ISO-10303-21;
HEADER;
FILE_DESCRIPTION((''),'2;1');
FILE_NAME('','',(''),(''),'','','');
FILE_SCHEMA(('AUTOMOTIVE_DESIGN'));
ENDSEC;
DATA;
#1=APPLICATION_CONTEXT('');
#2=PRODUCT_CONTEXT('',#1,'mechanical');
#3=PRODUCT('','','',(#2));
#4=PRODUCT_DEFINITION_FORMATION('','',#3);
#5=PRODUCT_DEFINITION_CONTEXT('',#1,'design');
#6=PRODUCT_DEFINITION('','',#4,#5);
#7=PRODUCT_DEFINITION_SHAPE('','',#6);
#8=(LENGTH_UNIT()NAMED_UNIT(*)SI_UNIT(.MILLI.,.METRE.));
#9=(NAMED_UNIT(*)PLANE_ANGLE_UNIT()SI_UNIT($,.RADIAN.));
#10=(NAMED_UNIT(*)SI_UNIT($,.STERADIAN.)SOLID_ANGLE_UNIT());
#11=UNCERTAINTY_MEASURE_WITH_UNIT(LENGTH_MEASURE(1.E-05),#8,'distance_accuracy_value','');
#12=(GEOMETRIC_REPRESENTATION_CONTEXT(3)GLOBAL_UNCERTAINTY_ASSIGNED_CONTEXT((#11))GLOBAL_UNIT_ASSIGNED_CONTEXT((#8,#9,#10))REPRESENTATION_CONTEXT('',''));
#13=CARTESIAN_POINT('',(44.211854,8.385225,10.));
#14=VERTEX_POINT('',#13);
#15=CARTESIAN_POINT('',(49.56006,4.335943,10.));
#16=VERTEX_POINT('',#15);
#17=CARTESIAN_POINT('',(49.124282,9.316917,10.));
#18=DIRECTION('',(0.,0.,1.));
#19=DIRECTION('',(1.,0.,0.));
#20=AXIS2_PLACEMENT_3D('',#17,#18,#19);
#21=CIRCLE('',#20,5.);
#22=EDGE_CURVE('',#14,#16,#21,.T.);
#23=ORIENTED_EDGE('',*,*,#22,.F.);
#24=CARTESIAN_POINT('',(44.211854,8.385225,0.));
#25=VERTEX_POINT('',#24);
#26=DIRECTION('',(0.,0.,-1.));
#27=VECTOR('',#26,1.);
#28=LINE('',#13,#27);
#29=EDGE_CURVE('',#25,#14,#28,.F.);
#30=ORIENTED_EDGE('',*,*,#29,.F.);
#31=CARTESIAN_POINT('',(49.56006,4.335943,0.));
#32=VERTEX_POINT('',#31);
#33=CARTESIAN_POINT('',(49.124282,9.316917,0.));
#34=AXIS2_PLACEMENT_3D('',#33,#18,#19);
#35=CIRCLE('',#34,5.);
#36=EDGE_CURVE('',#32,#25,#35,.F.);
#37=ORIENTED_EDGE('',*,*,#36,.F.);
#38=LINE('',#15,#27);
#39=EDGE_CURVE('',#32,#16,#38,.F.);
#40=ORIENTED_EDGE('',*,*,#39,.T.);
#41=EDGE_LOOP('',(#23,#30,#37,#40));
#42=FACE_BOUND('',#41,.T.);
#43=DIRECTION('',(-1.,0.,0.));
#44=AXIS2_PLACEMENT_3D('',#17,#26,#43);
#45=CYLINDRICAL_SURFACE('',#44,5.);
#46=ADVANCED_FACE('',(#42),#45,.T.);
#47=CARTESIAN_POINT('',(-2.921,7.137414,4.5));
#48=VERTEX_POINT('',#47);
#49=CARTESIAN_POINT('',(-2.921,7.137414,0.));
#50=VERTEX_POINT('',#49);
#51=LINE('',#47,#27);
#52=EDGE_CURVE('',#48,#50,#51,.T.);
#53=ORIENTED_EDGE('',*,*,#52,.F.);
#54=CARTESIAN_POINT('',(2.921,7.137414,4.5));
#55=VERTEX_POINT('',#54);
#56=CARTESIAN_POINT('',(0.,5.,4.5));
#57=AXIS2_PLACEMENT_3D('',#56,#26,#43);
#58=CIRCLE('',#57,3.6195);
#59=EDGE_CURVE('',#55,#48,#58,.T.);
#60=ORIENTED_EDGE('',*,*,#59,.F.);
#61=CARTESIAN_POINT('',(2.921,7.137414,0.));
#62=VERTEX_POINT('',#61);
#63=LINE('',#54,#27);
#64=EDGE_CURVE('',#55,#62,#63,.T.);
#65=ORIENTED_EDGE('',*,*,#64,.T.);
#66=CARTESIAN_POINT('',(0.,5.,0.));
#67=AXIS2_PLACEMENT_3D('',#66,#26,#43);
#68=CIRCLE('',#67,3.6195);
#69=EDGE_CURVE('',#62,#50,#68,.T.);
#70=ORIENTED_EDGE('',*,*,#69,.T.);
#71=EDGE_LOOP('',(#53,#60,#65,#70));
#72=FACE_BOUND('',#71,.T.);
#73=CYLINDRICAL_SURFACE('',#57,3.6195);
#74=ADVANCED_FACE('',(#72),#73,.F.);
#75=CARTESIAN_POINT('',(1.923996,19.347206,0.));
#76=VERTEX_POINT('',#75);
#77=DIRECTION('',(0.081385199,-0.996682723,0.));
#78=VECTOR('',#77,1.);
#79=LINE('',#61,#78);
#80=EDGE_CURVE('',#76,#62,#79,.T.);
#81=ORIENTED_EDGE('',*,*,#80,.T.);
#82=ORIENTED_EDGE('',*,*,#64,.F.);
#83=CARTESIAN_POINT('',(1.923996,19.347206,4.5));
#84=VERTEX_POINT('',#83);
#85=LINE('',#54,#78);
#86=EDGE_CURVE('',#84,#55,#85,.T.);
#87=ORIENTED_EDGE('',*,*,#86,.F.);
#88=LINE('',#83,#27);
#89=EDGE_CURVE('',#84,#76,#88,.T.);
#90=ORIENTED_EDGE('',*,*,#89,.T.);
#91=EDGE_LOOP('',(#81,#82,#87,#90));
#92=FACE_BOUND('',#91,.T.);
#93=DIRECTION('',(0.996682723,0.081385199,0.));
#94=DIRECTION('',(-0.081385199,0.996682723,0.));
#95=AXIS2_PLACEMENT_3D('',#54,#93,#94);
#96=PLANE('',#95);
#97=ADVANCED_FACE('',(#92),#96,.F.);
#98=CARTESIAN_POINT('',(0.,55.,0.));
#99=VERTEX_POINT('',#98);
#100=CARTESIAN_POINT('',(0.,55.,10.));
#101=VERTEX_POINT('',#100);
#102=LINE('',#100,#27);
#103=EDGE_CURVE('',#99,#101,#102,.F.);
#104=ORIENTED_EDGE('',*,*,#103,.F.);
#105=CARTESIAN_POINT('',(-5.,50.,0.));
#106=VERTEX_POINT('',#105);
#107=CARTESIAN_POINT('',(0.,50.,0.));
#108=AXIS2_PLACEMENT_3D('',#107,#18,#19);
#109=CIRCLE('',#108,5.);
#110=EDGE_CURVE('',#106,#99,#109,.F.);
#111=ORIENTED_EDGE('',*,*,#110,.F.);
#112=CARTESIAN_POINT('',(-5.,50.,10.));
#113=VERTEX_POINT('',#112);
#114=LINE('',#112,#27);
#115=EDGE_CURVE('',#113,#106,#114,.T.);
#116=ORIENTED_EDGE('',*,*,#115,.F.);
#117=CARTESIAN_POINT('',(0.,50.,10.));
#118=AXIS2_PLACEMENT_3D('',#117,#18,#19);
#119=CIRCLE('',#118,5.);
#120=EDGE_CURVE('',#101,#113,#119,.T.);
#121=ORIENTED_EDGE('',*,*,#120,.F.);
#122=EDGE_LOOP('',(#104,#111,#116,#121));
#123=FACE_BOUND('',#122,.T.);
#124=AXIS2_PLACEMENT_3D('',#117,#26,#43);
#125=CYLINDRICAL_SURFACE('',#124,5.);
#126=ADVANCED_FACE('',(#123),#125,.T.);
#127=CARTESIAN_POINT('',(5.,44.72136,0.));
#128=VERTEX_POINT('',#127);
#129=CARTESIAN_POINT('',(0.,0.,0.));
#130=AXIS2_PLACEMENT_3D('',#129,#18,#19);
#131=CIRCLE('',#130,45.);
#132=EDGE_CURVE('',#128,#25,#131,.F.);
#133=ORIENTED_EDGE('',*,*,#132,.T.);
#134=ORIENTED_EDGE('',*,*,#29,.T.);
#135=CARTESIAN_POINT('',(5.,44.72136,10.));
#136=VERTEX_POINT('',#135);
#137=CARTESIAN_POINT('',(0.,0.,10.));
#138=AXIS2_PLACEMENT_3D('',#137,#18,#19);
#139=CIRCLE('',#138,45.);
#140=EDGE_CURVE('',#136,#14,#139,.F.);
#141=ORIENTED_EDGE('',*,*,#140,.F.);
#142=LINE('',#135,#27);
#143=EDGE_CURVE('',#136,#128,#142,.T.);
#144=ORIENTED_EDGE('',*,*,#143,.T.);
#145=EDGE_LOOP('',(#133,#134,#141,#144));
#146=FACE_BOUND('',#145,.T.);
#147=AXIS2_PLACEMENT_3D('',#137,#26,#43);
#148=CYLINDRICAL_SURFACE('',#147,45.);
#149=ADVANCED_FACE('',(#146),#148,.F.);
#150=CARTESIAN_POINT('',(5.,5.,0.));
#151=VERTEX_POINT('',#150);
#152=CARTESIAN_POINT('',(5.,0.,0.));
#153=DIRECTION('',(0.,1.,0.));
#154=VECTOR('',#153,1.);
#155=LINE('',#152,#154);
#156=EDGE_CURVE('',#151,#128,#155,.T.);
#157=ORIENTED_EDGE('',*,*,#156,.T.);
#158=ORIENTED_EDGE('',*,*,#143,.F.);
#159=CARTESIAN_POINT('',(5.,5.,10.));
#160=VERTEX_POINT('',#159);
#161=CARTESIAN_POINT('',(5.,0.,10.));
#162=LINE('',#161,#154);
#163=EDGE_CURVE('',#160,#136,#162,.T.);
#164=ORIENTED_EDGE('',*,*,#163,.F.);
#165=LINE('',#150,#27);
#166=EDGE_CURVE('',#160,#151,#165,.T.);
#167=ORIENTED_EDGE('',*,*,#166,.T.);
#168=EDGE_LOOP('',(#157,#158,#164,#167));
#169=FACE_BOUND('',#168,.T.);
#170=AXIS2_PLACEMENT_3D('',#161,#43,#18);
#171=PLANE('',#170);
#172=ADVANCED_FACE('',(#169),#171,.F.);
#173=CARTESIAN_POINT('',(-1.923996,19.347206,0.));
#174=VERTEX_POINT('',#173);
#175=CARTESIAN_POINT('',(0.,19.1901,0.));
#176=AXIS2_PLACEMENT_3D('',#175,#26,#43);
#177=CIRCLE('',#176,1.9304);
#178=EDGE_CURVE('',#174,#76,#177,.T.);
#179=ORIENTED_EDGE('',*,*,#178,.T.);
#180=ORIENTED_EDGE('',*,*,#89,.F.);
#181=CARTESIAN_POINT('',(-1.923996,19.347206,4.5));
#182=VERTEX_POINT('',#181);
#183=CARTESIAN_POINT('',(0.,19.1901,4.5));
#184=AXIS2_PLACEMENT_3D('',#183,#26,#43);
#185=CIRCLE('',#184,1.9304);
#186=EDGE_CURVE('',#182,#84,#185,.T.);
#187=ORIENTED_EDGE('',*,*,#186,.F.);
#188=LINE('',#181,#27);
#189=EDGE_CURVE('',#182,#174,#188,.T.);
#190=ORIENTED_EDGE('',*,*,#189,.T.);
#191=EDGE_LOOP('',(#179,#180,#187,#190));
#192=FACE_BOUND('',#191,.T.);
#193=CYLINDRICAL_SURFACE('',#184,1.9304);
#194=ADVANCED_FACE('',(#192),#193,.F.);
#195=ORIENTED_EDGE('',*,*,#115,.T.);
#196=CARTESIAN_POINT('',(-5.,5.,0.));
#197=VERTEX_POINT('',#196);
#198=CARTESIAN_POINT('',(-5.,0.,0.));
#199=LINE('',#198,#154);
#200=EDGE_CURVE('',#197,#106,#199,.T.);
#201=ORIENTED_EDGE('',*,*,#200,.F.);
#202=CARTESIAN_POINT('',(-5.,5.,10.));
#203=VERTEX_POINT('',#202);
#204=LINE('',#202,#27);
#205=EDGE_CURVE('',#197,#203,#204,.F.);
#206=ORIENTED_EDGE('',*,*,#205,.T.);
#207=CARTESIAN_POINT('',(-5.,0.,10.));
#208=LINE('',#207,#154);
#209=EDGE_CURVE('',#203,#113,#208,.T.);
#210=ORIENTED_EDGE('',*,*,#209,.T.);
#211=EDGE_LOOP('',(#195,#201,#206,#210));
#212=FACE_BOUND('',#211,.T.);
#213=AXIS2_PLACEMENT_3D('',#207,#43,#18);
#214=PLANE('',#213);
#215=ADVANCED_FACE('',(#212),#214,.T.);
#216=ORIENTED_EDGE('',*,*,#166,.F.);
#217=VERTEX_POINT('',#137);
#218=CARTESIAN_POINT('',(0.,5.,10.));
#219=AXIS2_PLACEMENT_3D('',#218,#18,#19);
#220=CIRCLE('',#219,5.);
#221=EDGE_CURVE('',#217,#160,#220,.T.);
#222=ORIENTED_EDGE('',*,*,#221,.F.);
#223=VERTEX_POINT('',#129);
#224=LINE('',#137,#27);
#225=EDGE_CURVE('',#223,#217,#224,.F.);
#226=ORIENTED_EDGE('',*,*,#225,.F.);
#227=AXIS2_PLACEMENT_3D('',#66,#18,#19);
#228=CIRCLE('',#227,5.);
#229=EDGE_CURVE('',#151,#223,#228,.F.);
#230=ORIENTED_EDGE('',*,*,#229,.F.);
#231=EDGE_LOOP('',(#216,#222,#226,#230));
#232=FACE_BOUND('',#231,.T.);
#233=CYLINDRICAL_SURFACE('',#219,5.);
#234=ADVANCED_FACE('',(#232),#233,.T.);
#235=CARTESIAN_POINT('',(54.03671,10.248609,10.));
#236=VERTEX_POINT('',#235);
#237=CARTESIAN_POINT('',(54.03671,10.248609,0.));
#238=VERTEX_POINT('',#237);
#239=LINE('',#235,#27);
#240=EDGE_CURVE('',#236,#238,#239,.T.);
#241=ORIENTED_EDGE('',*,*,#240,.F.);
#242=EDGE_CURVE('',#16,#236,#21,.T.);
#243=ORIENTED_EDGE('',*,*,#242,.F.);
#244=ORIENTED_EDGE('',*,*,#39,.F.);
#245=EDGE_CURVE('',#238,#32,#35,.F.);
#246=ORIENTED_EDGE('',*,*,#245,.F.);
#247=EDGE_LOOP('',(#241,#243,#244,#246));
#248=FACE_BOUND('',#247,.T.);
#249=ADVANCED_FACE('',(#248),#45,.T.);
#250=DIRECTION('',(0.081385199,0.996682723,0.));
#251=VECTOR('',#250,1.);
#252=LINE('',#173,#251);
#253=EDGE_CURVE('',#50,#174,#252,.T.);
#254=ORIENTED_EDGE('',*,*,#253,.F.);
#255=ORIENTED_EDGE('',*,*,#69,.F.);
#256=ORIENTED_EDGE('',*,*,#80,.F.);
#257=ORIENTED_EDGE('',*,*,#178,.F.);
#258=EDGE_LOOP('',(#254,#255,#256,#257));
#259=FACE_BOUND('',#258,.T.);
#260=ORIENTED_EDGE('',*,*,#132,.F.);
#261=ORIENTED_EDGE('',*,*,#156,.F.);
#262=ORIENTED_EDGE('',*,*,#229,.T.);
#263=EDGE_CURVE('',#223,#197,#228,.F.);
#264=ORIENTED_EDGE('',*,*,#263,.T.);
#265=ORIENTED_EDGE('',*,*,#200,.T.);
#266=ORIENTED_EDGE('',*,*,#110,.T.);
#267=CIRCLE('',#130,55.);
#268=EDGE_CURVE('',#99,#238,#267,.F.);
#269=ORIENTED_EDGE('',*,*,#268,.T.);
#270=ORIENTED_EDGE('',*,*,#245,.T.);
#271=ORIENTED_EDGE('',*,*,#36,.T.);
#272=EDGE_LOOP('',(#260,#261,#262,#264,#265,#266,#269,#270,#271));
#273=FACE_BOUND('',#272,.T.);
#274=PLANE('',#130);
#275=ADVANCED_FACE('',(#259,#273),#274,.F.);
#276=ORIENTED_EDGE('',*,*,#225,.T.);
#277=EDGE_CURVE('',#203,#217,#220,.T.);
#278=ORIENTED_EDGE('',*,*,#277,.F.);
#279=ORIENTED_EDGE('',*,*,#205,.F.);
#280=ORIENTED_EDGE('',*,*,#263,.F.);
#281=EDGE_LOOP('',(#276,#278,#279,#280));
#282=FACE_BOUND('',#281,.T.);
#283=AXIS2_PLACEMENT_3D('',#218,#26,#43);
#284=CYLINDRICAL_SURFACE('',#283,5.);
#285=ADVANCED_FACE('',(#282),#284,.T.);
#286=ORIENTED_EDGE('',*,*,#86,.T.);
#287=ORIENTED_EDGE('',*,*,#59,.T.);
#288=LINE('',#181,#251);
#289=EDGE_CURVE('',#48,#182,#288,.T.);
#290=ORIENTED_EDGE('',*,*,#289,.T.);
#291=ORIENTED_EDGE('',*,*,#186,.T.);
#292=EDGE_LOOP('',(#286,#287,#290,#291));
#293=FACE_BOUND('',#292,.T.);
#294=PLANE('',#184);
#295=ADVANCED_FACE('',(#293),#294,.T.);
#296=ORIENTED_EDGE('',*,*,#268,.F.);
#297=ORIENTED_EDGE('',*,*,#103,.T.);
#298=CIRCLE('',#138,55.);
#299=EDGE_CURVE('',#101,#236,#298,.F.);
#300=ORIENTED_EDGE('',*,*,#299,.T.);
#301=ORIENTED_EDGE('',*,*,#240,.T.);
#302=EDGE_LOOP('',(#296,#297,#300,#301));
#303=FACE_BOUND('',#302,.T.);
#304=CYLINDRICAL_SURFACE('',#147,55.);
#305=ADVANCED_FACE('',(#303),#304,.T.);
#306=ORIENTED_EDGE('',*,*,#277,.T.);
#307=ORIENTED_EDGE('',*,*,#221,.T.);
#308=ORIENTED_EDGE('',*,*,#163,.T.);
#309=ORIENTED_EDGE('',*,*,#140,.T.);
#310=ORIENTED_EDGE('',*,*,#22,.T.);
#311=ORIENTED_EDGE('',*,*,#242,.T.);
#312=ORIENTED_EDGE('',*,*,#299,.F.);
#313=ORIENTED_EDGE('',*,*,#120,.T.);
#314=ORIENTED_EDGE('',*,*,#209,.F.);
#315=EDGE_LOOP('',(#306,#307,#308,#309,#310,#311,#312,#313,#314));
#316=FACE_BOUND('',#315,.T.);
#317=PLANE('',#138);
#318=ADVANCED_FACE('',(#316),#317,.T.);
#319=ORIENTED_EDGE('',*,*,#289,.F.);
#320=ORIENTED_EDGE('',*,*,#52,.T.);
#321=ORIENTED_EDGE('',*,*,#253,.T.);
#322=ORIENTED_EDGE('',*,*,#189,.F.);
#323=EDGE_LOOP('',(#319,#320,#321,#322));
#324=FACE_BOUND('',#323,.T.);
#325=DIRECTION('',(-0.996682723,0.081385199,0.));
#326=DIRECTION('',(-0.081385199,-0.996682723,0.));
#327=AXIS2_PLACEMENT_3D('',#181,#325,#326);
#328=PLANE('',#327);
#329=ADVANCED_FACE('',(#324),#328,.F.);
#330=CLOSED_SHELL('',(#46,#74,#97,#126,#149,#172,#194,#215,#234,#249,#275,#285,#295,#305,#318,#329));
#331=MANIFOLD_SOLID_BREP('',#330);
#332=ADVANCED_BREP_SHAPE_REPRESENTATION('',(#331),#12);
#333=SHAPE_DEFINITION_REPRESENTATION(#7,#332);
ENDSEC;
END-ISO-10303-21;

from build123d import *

# Parameters (mm, degrees)
EXTRUDE_THIN1_DEPTH = 10
FILLET1_R           = 5
FILLET2_R           = 5
FILLET3_R           = 5
FILLET4_R           = 5
FILLET5_R           = 5
CUT_EXTRUDE1_DEPTH  = 4.5


with BuildPart() as part:
    # Sketch1 → Extrude-Thin1 (new body)
    with BuildSketch(Plane.XY):
        with BuildLine():
            Line((5, 0), (5, 44.72135955))
            ThreePointArc((5, 44.72135955), (32.200514423, 31.434485377), (44.828761414, 3.922008424))
            Line((44.828761414, 3.922008424), (54.790708395, 4.793565851))
            ThreePointArc((54.790708395, 4.793565851), (35.273871656, 42.198980774), (-5, 54.772255751))
            Line((-5, 54.772255751), (-5, 0))
            Line((-5, 0), (5, 0))
        make_face()
    extrude(amount=EXTRUDE_THIN1_DEPTH)

    # Fillet1
    fillet1_edges = [part.edges().sort_by_distance(p)[0] for p in [
        (-5, 54.772255751, 5),
    ]]
    fillet(fillet1_edges, radius=FILLET1_R)

    # Fillet2
    fillet2_edges = [part.edges().sort_by_distance(p)[0] for p in [
        (54.790708395, 4.793565851, 5),
    ]]
    fillet(fillet2_edges, radius=FILLET2_R)

    # Fillet3
    fillet3_edges = [part.edges().sort_by_distance(p)[0] for p in [
        (44.828761414, 3.922008424, 5),
    ]]
    fillet(fillet3_edges, radius=FILLET3_R - 0.0001)  # a hair under: the kernel refuses the full size

    # Fillet4
    fillet4_edges = [part.edges().sort_by_distance(p)[0] for p in [
        (5, 0, 5),
    ]]
    fillet(fillet4_edges, radius=FILLET4_R)

    # Fillet5
    fillet5_edges = [part.edges().sort_by_distance(p)[0] for p in [
        (-5, 0, 5),
    ]]
    fillet(fillet5_edges, radius=FILLET5_R - 0.0001)  # a hair under: the kernel refuses the full size

    # Sketch2 → Cut-Extrude1 (cut)
    with BuildSketch(Plane(origin=(0, 0, 0), x_dir=(-1, 0, 0), z_dir=(0, 0, -1))):
        with BuildLine():
            Line((1.923996328, 19.347205988), (2.921, 7.13741415))
            ThreePointArc((2.921, 7.13741415), (0, 1.3805), (-2.921, 7.13741415))
            Line((-2.921, 7.13741415), (-1.923996328, 19.347205988))
            ThreePointArc((-1.923996328, 19.347205988), (0, 21.1205), (1.923996328, 19.347205988))
        make_face()
    extrude(amount=-CUT_EXTRUDE1_DEPTH, mode=Mode.SUBTRACT)


solid = part.part
